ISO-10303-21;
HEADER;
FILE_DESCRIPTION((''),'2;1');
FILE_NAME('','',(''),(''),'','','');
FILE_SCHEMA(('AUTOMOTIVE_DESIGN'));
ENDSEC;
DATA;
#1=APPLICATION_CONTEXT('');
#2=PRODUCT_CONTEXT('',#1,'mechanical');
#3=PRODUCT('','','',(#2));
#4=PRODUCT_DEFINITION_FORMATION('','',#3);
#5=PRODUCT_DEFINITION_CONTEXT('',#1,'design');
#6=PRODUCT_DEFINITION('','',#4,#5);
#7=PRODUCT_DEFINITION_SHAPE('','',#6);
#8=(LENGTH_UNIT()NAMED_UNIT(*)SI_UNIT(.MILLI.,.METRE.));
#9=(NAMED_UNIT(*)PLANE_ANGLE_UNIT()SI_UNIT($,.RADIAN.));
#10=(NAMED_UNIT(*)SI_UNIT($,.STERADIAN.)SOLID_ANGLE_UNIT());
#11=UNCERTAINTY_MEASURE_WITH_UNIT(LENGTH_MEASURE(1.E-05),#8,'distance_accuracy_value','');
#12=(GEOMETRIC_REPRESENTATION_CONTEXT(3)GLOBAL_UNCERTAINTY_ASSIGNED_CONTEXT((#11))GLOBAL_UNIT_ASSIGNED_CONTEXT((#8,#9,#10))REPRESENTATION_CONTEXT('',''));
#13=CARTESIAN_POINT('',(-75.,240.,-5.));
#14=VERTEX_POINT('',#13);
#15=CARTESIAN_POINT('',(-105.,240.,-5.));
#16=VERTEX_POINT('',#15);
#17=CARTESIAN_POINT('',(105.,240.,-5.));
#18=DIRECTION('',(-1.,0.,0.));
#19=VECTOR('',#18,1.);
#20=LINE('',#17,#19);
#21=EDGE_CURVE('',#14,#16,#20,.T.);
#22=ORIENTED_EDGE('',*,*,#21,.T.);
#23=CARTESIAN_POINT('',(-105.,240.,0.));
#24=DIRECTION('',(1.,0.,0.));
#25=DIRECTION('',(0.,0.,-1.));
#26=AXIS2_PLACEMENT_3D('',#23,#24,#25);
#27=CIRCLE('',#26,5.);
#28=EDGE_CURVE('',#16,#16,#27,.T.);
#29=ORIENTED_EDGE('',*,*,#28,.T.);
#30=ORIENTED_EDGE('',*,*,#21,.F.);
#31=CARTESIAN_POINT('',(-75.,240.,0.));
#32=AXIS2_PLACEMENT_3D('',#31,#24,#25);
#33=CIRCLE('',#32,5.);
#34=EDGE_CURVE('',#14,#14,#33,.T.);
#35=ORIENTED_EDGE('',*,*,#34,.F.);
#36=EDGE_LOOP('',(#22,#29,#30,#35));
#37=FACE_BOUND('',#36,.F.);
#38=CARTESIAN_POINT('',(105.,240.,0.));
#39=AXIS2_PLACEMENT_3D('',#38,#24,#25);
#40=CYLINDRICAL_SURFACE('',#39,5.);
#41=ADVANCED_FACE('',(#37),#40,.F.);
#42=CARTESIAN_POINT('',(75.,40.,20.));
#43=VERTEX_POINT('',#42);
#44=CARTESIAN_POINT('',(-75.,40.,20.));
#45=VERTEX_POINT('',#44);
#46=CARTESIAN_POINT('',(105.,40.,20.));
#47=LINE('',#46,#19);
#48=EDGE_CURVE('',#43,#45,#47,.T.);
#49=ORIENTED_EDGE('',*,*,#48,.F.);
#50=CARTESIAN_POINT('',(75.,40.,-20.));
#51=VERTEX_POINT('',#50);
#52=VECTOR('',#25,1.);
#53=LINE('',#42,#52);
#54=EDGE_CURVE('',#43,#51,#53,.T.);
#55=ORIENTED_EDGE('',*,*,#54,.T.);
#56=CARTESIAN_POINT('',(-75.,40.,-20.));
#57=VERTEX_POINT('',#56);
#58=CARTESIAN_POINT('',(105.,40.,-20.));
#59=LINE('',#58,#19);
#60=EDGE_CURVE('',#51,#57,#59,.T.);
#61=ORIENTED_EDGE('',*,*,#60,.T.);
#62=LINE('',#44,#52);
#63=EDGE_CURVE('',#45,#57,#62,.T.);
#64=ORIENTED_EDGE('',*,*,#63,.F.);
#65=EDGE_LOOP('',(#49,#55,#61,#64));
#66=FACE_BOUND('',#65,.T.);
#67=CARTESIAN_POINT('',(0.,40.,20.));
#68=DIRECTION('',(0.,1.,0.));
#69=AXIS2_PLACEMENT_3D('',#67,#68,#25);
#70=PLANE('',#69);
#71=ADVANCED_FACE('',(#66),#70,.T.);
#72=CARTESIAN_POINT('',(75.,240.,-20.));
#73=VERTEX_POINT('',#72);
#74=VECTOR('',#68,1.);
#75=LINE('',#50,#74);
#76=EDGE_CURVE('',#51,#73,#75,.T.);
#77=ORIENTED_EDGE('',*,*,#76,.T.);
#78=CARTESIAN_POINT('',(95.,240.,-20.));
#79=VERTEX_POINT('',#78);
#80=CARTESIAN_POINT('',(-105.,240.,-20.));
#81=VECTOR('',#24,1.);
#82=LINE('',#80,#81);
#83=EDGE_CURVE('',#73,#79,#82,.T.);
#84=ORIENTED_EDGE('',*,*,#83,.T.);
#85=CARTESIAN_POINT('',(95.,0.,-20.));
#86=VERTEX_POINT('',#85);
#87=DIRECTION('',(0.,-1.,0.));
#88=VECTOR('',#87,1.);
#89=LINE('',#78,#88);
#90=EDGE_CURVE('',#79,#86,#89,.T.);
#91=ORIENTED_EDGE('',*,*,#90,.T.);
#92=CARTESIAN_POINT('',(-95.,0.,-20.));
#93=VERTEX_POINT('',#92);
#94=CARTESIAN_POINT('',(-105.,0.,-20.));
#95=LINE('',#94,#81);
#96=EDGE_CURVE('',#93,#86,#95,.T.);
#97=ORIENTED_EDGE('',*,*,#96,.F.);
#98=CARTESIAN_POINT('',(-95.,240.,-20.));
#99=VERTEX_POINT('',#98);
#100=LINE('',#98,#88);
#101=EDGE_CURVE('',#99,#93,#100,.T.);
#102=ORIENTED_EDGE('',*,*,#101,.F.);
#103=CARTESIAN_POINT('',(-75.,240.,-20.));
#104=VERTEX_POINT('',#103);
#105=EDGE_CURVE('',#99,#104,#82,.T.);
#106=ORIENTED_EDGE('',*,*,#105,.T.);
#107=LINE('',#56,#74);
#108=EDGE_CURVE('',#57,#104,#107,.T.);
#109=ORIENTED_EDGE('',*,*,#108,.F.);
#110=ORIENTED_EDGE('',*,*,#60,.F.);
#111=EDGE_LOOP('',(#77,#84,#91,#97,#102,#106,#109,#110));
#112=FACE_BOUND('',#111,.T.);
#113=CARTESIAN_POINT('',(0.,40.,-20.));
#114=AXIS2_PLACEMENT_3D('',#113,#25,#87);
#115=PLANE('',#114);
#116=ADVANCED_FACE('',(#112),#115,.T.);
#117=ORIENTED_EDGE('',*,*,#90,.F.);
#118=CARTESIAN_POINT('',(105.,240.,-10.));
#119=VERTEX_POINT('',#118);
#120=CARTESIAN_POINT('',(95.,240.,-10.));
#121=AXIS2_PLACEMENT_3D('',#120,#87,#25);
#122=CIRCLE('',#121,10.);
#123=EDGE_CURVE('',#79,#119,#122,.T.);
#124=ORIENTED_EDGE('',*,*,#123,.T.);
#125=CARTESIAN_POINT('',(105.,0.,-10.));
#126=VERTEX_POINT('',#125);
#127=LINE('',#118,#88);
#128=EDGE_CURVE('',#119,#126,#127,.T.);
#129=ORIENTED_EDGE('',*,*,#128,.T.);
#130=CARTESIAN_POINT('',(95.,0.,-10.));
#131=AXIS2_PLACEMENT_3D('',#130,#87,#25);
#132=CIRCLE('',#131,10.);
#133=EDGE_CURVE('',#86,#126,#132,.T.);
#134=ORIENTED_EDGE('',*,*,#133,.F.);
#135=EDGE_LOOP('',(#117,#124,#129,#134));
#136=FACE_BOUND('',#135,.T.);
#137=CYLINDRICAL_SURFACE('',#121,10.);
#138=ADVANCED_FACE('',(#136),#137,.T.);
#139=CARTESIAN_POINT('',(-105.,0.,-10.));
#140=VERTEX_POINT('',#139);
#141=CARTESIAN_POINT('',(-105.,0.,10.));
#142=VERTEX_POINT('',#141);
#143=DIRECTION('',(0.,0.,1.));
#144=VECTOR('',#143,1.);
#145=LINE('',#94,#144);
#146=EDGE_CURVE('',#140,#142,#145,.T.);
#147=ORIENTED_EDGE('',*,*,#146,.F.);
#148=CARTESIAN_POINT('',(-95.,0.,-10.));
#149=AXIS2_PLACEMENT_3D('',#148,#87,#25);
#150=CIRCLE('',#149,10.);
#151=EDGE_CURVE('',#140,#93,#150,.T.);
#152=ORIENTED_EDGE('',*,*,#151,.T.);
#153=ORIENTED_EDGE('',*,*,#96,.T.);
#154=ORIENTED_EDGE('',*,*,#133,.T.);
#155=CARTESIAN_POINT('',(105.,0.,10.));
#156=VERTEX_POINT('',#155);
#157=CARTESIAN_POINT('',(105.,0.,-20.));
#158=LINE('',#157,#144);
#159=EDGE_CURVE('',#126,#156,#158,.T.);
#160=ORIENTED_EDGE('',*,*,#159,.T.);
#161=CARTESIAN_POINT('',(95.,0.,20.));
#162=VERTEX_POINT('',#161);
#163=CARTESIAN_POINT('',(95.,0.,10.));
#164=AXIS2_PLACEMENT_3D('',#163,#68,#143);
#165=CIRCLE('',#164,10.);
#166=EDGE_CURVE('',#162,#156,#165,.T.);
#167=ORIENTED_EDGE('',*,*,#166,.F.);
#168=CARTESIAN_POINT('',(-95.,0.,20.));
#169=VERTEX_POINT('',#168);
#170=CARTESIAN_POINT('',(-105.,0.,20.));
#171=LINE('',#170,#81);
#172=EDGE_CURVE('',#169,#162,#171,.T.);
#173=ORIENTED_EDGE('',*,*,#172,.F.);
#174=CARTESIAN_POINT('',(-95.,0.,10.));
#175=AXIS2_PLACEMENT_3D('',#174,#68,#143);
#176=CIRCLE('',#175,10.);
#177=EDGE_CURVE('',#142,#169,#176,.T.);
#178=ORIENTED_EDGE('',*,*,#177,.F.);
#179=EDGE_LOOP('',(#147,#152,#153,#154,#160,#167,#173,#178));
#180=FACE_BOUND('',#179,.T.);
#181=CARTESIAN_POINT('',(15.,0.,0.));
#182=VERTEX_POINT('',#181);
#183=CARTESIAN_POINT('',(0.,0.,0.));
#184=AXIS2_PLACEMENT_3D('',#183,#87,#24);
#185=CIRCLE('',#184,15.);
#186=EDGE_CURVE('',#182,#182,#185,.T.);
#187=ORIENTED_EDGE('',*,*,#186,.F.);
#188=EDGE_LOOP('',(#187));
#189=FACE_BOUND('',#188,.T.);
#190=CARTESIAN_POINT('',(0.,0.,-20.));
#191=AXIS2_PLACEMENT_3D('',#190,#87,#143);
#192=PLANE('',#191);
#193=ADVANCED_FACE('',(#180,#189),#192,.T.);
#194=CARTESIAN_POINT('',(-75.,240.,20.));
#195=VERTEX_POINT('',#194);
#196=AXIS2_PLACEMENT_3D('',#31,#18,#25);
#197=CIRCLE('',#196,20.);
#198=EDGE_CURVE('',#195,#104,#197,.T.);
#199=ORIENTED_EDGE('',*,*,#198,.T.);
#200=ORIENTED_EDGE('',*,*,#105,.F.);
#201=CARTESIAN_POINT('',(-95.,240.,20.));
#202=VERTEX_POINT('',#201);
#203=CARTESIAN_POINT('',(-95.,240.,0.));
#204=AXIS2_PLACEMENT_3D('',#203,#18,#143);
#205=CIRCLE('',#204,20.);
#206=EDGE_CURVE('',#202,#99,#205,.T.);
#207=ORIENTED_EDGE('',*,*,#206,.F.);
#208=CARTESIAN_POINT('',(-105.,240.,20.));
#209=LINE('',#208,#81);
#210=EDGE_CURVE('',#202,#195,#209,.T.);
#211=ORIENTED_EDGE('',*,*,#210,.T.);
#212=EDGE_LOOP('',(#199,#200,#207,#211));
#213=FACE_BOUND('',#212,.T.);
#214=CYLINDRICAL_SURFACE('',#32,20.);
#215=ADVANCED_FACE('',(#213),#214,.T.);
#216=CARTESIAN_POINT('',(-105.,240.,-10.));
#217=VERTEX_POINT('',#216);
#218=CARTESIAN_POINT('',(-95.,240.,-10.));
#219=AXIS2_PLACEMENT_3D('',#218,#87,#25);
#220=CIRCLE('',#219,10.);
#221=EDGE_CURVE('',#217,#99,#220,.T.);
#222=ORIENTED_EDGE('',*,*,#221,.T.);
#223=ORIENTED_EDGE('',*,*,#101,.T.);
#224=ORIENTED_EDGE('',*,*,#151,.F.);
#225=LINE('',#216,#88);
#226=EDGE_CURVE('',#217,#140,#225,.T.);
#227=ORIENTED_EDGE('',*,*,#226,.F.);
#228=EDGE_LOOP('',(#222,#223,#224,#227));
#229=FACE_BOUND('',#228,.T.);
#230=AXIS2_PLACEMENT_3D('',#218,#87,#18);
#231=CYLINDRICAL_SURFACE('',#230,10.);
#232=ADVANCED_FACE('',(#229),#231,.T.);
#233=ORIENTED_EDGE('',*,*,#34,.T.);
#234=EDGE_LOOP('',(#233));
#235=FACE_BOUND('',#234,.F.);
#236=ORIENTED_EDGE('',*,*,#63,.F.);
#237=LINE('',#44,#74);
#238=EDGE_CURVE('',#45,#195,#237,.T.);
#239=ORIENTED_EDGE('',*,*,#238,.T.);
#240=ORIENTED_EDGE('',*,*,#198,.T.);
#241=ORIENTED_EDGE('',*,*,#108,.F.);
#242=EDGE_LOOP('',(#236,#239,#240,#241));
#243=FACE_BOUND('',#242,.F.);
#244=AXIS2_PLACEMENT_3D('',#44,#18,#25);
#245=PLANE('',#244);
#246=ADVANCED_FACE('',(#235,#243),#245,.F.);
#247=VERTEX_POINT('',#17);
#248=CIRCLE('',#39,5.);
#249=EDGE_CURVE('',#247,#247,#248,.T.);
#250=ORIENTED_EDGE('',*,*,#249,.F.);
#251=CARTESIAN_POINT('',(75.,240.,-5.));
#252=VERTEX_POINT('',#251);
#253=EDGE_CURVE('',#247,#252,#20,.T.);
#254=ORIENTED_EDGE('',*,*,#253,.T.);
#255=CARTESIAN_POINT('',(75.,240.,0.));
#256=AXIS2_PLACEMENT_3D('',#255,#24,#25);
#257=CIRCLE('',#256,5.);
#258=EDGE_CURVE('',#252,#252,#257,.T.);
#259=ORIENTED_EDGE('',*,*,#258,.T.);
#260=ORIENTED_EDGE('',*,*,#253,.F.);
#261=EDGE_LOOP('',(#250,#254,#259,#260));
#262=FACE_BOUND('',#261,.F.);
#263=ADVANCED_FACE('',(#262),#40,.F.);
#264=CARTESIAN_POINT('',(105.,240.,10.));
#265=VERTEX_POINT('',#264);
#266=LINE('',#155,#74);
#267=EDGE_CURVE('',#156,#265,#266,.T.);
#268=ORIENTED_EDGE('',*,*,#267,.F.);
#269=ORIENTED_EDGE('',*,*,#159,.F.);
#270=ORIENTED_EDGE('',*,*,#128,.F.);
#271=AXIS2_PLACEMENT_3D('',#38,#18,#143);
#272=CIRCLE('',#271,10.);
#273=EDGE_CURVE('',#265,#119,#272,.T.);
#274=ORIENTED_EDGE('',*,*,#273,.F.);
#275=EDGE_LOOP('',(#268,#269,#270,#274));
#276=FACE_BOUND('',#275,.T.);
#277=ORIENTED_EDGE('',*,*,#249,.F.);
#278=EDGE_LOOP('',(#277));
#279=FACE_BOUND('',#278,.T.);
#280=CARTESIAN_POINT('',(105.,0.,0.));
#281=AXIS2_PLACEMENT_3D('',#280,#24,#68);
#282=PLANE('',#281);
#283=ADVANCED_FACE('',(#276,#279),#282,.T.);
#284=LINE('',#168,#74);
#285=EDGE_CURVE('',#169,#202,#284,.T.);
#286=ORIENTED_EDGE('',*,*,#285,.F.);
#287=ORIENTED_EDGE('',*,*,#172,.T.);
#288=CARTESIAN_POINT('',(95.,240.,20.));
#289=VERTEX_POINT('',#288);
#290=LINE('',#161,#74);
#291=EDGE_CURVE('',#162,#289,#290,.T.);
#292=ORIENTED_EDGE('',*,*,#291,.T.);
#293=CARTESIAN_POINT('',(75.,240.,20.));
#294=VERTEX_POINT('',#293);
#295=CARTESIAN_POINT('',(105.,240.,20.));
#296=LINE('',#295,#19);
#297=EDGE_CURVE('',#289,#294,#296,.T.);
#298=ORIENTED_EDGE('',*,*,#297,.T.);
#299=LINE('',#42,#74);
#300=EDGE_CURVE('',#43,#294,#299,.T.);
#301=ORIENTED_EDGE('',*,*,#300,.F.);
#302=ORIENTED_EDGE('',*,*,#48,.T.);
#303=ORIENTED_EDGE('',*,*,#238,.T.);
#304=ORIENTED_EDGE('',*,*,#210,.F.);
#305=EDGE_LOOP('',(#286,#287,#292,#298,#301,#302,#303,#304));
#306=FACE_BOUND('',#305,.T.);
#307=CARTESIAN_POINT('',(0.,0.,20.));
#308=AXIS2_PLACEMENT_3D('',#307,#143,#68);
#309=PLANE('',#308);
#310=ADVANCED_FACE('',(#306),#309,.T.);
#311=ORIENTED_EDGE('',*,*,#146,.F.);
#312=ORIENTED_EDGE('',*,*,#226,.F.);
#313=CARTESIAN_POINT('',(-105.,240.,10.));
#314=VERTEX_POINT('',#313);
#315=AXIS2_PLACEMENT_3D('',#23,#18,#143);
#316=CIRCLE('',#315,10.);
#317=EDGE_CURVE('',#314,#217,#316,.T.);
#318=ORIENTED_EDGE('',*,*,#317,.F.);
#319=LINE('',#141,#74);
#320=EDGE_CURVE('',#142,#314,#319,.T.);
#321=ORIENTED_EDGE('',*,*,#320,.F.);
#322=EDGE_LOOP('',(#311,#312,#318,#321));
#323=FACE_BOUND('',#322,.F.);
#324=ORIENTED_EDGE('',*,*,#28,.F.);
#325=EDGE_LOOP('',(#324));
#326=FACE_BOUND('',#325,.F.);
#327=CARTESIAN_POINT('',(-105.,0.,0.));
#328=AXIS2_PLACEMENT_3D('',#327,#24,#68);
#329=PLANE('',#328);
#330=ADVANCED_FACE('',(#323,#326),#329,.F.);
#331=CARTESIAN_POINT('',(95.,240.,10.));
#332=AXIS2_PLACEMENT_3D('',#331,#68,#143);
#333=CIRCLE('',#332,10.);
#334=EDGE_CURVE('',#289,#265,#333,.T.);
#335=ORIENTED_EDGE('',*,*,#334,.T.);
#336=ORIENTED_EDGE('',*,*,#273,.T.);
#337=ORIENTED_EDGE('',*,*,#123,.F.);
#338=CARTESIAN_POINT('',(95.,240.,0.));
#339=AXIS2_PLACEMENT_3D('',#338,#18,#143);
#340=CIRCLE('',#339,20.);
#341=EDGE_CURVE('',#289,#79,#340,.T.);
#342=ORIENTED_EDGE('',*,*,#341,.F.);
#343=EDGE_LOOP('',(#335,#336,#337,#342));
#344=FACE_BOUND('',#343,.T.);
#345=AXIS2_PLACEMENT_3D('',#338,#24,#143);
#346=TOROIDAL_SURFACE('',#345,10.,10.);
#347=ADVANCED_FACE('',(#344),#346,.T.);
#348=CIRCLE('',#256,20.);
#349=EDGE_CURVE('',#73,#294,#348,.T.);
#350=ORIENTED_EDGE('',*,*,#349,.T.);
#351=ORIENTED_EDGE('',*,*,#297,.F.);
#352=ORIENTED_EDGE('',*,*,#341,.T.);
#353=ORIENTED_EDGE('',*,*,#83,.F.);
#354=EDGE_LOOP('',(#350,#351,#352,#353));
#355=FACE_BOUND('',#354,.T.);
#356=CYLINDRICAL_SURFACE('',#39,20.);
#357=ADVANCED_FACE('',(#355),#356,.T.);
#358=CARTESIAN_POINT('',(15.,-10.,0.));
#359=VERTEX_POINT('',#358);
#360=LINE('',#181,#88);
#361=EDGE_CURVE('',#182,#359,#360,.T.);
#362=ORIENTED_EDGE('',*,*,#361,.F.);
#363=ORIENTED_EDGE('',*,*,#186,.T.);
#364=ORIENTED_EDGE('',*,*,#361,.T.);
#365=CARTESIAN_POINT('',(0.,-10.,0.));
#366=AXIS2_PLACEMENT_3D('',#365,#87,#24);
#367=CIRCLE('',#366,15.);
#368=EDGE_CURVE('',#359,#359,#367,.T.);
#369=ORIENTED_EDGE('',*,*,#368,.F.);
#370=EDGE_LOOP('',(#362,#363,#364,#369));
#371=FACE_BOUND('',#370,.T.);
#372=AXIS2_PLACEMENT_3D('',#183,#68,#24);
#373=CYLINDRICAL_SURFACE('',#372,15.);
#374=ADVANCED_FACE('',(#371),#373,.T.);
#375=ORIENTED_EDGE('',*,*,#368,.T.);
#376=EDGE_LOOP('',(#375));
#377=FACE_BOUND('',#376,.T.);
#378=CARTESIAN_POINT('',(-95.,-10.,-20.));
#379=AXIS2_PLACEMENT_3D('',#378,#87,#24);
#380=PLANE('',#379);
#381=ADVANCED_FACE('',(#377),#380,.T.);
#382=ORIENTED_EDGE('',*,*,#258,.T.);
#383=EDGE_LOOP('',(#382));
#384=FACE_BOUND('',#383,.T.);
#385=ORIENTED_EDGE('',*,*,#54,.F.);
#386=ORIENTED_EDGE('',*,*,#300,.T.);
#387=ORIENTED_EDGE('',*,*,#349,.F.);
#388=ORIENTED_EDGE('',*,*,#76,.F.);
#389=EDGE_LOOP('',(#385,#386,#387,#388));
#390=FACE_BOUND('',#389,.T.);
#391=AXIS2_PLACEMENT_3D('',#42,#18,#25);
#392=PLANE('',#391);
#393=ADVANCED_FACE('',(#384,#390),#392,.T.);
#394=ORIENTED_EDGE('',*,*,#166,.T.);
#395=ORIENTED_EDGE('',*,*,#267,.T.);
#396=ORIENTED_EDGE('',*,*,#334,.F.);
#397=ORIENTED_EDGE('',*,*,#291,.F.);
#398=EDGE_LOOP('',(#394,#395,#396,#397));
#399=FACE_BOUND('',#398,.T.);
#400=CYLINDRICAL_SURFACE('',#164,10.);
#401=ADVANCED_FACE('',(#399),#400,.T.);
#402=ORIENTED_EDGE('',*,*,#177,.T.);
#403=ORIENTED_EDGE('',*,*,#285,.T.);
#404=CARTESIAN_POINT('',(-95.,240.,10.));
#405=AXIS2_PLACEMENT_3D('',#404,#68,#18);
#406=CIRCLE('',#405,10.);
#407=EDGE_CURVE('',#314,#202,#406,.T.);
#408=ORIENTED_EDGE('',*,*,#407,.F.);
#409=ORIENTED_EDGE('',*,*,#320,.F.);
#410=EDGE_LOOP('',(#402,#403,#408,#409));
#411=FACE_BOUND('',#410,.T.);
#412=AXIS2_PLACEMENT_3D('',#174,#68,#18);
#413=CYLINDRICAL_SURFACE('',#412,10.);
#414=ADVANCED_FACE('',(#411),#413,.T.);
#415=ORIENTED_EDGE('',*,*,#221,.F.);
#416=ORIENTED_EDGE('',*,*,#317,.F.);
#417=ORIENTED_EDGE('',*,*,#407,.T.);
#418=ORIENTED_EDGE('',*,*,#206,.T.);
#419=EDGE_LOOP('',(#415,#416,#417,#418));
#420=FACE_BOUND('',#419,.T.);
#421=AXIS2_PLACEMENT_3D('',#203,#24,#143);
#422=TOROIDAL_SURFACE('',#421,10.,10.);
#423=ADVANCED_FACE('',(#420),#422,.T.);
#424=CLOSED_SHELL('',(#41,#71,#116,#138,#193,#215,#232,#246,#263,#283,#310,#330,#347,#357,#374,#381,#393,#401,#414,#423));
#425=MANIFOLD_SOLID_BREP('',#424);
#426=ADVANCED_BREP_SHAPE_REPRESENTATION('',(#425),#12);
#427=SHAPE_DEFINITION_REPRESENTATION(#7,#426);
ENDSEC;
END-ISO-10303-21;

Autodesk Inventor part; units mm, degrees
ref_plane "YZ Plane" through (0, 0, 0) normal (1, 0, 0) x (0, 1, 0)
ref_plane "XZ Plane" through (0, 0, 0) normal (0, 1, 0) x (-1, 0, 0)
ref_plane "XY Plane" through (0, 0, 0) normal (0, 0, 1) x (1, 0, 0)
sketch "Sketch1" plane through (0, 0, 0) normal (1, 0, 0) x (0, 1, 0)
  line L0 (0, 20) -> (40, 20)
  line L1 (40, 20) -> (40, -20)
  line L2 (40, -20) -> (0, -20)
  line L3 (0, -20) -> (0, 20)
  point P0 (0, 0)
  dimension "d0" = 20
  dimension "d1" = 40
  dimension "d2" = 40
  dimension "d3" = 40
extrude "Extrusion1" add sketch "Sketch1" along normal mid plane 210
sketch "Sketch2" plane through (-105, 40, 20) normal (0, 1, 0) x (1, 0, 0)
  line L0 (210, 40) -> (210, 0) projected
  line L1 (0, 40) -> (210, 40) projected
  line L2 (210, 0) -> (180, 0)
  line L3 (180, 0) -> (180, 40)
  line L4 (180, 40) -> (210, 40)
  line L5 (210, 40) -> (210, 0)
  line L6 (0, 0) -> (210, 0) projected
  line L7 (0, 0) -> (30, 0)
  line L8 (30, 0) -> (30, 40)
  line L9 (30, 40) -> (0, 40)
  line L10 (0, 40) -> (0, 0)
  point P0 (105, 20)
  point P1 (0, 40)
  point P2 (30, 0)
  point P3 (30, 40)
  dimension "d6" = 30
  dimension "d7" = 30
extrude "Extrusion2" add sketch "Sketch2" along normal blind 200 contours L0 L2 L3 L1 | L8 L6 L10 L1
sketch "Sketch3" plane through (-75, 40, 20) normal (1, 0, 0) x (0, 0, -1)
  line L0 (40, 200) -> (0, 200) projected
  circle A0 centre (20, 200) radius 20
  circle A1 centre (20, 200) radius 5
  point P0 (20, -40)
  dimension "d14" = 10
extrude "Extrusion3" add sketch "Sketch3" against normal up to surface (30 mm away)
sketch "Sketch4" plane through (105, 0, 0) normal (1, 0, 0) x (0, 0, -1)
  arc A0 (20, 240) -> (-20, 240) centre (0, 240) ccw projected
  line L0 (-20, 240) -> (20, 240) projected
  circle A1 centre (0, 240) radius 20
  point P0 (0, 0)
  point P1 (-20, 240)
extrude "Extrusion4" add sketch "Sketch4" against normal up to surface (30 mm away)
sketch "Sketch5" plane through (105, 0, 0) normal (1, 0, 0) x (0, 0, -1)
  arc A0 (20, 240) -> (-20, 240) centre (0, 240) ccw projected
  circle A1 centre (0, 240) radius 5
  point P0 (0, 0)
  dimension "d15" = 10
extrude "Extrusion5" cut sketch "Sketch5" against normal through all
fillet "Fillet1" radius 10 6 edges at (105, 120, 20) (105, 120, -20) (105, 260, 0) (-105, 120, -20) (-105, 120, 20) (-105, 260, 0)
sketch "Sketch6" plane through (-95, 0, -20) normal (0, -1, 0) x (1, 0, 0)
  circle A0 centre (95, 20) radius 15
  dimension "d21" = 30
extrude "Extrusion6" add sketch "Sketch6" along normal blind 10
properties part number "AERO - Fork"
